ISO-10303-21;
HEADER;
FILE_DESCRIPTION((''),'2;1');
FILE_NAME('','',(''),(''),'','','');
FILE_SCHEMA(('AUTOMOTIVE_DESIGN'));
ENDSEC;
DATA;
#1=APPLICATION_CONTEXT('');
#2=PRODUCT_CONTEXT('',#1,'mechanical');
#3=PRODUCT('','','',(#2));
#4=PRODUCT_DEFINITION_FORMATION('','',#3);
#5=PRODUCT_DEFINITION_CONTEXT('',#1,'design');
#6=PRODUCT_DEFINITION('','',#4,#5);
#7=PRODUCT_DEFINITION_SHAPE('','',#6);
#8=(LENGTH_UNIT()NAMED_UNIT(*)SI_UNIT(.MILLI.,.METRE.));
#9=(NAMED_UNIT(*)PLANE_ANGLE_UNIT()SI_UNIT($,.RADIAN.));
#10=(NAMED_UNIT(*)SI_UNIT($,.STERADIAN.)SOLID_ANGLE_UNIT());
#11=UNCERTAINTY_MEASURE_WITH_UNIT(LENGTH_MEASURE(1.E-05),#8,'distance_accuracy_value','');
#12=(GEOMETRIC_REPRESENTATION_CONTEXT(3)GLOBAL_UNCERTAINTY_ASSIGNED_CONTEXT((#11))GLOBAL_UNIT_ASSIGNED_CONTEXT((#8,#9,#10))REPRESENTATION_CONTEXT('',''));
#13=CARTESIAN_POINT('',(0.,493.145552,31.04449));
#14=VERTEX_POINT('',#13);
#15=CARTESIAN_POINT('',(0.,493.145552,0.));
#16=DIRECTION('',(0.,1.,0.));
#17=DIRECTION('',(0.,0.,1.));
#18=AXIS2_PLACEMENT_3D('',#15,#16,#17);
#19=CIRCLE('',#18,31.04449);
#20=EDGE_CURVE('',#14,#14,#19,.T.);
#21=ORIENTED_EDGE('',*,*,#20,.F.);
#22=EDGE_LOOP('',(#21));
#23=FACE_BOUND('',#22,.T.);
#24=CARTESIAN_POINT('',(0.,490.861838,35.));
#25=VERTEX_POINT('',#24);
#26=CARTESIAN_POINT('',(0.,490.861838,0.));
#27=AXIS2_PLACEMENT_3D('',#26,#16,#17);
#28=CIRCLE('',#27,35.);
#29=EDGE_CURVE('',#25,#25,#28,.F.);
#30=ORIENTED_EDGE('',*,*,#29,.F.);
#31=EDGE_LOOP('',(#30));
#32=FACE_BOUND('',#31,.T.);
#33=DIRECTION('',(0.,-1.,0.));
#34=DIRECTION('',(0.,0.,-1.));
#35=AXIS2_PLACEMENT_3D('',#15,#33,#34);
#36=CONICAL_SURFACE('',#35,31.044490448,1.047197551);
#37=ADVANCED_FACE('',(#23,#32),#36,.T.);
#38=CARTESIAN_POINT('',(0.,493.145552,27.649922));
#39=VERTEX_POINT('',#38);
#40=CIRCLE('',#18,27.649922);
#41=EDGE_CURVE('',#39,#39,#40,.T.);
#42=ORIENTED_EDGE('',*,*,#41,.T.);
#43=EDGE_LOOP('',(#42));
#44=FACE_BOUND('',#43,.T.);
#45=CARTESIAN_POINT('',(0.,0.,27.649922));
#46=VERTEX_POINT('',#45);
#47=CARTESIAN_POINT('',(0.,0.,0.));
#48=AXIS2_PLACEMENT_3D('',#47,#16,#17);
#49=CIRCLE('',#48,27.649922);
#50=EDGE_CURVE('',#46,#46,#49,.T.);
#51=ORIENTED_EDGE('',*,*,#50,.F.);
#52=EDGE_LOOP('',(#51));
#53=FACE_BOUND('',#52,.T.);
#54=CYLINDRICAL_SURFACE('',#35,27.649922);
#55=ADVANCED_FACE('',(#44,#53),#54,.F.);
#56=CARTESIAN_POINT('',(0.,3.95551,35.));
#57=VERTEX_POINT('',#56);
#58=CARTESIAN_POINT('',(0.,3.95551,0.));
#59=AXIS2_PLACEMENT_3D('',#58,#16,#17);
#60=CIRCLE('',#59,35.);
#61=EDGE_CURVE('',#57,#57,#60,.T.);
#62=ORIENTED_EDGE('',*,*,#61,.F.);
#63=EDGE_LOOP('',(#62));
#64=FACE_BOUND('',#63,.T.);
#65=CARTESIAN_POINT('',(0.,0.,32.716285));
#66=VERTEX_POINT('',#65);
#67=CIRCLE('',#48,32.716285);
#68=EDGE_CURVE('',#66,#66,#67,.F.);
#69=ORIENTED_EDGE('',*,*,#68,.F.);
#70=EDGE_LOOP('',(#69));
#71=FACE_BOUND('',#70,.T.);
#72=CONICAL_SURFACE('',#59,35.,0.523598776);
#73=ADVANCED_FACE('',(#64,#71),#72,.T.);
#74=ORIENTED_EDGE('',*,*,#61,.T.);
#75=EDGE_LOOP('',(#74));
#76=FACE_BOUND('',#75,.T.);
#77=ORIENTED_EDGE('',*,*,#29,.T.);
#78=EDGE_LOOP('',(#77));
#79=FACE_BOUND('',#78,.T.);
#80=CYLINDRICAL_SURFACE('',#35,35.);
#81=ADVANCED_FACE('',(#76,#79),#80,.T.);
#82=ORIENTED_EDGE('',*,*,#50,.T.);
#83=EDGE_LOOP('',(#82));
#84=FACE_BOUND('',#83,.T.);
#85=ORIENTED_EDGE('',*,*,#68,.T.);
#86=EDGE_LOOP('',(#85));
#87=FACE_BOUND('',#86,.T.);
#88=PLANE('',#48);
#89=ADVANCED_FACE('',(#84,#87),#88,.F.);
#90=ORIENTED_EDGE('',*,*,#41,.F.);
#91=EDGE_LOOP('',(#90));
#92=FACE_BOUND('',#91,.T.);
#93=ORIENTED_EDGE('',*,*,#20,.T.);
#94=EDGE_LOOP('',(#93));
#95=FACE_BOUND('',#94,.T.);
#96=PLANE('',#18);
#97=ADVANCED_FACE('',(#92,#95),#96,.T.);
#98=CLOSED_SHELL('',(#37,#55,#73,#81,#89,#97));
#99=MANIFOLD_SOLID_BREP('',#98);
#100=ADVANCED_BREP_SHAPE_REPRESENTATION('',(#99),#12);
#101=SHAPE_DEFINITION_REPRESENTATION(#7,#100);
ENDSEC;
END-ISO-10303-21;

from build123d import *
from OCP.BRepFilletAPI import BRepFilletAPI_MakeChamfer

# Parameters (mm, degrees)
SKETCH1_R           = 35
BOSS_EXTRUDE1_DEPTH = 493.145552171
SKETCH2_R           = 27.649921817
CUT_EXTRUDE1_DEPTH  = 496.623380831
CHAMFER1_SIZE       = 2.283714505
CHAMFER1_SIZE2      = 3.955509552


with BuildPart() as part:
    # Sketch1 → Boss-Extrude1 (new body)
    with BuildSketch(Plane(origin=(0, 0, 0), x_dir=(1, 0, 0), z_dir=(0, 1, 0))):
        Circle(SKETCH1_R)
    extrude(amount=BOSS_EXTRUDE1_DEPTH)

    # Sketch2 → Cut-Extrude1 (cut, through all)
    with BuildSketch(Plane(origin=(0, 0, 0), x_dir=(1, 0, 0), z_dir=(0, 1, 0))):
        Circle(SKETCH2_R)
    extrude(amount=CUT_EXTRUDE1_DEPTH, mode=Mode.SUBTRACT)

    # Chamfer1: one chamfer whose edges measure the first distance from different faces: ONE call of the kernel's chamfer builder (chamfer() names one face for all edges)
    chamfer1_edges_1 = [part.edges().sort_by_distance(p)[0] for p in [
        (-35, 493.145552171, 0),
    ]]
    chamfer1_side_1 = [part.faces().sort_by_distance(p)[0] for p in [
        (-35, 246.572776086, 0),
    ]]
    chamfer1_edges_2 = [part.edges().sort_by_distance(p)[0] for p in [
        (-35, 0, 0),
    ]]
    chamfer1_side_2 = [part.faces().sort_by_distance(p)[0] for p in [
        (-34.010050506, 0, 0),
    ]]
    chamfer1 = BRepFilletAPI_MakeChamfer(part.part.solid().wrapped)
    for e in chamfer1_edges_1:
        chamfer1.Add(CHAMFER1_SIZE, CHAMFER1_SIZE2, e.wrapped, chamfer1_side_1[0].wrapped)  # the first distance lies on this face
    for e in chamfer1_edges_2:
        chamfer1.Add(CHAMFER1_SIZE, CHAMFER1_SIZE2, e.wrapped, chamfer1_side_2[0].wrapped)  # the first distance lies on this face
    add(Compound.cast(chamfer1.Shape()), mode=Mode.REPLACE)


solid = part.part
